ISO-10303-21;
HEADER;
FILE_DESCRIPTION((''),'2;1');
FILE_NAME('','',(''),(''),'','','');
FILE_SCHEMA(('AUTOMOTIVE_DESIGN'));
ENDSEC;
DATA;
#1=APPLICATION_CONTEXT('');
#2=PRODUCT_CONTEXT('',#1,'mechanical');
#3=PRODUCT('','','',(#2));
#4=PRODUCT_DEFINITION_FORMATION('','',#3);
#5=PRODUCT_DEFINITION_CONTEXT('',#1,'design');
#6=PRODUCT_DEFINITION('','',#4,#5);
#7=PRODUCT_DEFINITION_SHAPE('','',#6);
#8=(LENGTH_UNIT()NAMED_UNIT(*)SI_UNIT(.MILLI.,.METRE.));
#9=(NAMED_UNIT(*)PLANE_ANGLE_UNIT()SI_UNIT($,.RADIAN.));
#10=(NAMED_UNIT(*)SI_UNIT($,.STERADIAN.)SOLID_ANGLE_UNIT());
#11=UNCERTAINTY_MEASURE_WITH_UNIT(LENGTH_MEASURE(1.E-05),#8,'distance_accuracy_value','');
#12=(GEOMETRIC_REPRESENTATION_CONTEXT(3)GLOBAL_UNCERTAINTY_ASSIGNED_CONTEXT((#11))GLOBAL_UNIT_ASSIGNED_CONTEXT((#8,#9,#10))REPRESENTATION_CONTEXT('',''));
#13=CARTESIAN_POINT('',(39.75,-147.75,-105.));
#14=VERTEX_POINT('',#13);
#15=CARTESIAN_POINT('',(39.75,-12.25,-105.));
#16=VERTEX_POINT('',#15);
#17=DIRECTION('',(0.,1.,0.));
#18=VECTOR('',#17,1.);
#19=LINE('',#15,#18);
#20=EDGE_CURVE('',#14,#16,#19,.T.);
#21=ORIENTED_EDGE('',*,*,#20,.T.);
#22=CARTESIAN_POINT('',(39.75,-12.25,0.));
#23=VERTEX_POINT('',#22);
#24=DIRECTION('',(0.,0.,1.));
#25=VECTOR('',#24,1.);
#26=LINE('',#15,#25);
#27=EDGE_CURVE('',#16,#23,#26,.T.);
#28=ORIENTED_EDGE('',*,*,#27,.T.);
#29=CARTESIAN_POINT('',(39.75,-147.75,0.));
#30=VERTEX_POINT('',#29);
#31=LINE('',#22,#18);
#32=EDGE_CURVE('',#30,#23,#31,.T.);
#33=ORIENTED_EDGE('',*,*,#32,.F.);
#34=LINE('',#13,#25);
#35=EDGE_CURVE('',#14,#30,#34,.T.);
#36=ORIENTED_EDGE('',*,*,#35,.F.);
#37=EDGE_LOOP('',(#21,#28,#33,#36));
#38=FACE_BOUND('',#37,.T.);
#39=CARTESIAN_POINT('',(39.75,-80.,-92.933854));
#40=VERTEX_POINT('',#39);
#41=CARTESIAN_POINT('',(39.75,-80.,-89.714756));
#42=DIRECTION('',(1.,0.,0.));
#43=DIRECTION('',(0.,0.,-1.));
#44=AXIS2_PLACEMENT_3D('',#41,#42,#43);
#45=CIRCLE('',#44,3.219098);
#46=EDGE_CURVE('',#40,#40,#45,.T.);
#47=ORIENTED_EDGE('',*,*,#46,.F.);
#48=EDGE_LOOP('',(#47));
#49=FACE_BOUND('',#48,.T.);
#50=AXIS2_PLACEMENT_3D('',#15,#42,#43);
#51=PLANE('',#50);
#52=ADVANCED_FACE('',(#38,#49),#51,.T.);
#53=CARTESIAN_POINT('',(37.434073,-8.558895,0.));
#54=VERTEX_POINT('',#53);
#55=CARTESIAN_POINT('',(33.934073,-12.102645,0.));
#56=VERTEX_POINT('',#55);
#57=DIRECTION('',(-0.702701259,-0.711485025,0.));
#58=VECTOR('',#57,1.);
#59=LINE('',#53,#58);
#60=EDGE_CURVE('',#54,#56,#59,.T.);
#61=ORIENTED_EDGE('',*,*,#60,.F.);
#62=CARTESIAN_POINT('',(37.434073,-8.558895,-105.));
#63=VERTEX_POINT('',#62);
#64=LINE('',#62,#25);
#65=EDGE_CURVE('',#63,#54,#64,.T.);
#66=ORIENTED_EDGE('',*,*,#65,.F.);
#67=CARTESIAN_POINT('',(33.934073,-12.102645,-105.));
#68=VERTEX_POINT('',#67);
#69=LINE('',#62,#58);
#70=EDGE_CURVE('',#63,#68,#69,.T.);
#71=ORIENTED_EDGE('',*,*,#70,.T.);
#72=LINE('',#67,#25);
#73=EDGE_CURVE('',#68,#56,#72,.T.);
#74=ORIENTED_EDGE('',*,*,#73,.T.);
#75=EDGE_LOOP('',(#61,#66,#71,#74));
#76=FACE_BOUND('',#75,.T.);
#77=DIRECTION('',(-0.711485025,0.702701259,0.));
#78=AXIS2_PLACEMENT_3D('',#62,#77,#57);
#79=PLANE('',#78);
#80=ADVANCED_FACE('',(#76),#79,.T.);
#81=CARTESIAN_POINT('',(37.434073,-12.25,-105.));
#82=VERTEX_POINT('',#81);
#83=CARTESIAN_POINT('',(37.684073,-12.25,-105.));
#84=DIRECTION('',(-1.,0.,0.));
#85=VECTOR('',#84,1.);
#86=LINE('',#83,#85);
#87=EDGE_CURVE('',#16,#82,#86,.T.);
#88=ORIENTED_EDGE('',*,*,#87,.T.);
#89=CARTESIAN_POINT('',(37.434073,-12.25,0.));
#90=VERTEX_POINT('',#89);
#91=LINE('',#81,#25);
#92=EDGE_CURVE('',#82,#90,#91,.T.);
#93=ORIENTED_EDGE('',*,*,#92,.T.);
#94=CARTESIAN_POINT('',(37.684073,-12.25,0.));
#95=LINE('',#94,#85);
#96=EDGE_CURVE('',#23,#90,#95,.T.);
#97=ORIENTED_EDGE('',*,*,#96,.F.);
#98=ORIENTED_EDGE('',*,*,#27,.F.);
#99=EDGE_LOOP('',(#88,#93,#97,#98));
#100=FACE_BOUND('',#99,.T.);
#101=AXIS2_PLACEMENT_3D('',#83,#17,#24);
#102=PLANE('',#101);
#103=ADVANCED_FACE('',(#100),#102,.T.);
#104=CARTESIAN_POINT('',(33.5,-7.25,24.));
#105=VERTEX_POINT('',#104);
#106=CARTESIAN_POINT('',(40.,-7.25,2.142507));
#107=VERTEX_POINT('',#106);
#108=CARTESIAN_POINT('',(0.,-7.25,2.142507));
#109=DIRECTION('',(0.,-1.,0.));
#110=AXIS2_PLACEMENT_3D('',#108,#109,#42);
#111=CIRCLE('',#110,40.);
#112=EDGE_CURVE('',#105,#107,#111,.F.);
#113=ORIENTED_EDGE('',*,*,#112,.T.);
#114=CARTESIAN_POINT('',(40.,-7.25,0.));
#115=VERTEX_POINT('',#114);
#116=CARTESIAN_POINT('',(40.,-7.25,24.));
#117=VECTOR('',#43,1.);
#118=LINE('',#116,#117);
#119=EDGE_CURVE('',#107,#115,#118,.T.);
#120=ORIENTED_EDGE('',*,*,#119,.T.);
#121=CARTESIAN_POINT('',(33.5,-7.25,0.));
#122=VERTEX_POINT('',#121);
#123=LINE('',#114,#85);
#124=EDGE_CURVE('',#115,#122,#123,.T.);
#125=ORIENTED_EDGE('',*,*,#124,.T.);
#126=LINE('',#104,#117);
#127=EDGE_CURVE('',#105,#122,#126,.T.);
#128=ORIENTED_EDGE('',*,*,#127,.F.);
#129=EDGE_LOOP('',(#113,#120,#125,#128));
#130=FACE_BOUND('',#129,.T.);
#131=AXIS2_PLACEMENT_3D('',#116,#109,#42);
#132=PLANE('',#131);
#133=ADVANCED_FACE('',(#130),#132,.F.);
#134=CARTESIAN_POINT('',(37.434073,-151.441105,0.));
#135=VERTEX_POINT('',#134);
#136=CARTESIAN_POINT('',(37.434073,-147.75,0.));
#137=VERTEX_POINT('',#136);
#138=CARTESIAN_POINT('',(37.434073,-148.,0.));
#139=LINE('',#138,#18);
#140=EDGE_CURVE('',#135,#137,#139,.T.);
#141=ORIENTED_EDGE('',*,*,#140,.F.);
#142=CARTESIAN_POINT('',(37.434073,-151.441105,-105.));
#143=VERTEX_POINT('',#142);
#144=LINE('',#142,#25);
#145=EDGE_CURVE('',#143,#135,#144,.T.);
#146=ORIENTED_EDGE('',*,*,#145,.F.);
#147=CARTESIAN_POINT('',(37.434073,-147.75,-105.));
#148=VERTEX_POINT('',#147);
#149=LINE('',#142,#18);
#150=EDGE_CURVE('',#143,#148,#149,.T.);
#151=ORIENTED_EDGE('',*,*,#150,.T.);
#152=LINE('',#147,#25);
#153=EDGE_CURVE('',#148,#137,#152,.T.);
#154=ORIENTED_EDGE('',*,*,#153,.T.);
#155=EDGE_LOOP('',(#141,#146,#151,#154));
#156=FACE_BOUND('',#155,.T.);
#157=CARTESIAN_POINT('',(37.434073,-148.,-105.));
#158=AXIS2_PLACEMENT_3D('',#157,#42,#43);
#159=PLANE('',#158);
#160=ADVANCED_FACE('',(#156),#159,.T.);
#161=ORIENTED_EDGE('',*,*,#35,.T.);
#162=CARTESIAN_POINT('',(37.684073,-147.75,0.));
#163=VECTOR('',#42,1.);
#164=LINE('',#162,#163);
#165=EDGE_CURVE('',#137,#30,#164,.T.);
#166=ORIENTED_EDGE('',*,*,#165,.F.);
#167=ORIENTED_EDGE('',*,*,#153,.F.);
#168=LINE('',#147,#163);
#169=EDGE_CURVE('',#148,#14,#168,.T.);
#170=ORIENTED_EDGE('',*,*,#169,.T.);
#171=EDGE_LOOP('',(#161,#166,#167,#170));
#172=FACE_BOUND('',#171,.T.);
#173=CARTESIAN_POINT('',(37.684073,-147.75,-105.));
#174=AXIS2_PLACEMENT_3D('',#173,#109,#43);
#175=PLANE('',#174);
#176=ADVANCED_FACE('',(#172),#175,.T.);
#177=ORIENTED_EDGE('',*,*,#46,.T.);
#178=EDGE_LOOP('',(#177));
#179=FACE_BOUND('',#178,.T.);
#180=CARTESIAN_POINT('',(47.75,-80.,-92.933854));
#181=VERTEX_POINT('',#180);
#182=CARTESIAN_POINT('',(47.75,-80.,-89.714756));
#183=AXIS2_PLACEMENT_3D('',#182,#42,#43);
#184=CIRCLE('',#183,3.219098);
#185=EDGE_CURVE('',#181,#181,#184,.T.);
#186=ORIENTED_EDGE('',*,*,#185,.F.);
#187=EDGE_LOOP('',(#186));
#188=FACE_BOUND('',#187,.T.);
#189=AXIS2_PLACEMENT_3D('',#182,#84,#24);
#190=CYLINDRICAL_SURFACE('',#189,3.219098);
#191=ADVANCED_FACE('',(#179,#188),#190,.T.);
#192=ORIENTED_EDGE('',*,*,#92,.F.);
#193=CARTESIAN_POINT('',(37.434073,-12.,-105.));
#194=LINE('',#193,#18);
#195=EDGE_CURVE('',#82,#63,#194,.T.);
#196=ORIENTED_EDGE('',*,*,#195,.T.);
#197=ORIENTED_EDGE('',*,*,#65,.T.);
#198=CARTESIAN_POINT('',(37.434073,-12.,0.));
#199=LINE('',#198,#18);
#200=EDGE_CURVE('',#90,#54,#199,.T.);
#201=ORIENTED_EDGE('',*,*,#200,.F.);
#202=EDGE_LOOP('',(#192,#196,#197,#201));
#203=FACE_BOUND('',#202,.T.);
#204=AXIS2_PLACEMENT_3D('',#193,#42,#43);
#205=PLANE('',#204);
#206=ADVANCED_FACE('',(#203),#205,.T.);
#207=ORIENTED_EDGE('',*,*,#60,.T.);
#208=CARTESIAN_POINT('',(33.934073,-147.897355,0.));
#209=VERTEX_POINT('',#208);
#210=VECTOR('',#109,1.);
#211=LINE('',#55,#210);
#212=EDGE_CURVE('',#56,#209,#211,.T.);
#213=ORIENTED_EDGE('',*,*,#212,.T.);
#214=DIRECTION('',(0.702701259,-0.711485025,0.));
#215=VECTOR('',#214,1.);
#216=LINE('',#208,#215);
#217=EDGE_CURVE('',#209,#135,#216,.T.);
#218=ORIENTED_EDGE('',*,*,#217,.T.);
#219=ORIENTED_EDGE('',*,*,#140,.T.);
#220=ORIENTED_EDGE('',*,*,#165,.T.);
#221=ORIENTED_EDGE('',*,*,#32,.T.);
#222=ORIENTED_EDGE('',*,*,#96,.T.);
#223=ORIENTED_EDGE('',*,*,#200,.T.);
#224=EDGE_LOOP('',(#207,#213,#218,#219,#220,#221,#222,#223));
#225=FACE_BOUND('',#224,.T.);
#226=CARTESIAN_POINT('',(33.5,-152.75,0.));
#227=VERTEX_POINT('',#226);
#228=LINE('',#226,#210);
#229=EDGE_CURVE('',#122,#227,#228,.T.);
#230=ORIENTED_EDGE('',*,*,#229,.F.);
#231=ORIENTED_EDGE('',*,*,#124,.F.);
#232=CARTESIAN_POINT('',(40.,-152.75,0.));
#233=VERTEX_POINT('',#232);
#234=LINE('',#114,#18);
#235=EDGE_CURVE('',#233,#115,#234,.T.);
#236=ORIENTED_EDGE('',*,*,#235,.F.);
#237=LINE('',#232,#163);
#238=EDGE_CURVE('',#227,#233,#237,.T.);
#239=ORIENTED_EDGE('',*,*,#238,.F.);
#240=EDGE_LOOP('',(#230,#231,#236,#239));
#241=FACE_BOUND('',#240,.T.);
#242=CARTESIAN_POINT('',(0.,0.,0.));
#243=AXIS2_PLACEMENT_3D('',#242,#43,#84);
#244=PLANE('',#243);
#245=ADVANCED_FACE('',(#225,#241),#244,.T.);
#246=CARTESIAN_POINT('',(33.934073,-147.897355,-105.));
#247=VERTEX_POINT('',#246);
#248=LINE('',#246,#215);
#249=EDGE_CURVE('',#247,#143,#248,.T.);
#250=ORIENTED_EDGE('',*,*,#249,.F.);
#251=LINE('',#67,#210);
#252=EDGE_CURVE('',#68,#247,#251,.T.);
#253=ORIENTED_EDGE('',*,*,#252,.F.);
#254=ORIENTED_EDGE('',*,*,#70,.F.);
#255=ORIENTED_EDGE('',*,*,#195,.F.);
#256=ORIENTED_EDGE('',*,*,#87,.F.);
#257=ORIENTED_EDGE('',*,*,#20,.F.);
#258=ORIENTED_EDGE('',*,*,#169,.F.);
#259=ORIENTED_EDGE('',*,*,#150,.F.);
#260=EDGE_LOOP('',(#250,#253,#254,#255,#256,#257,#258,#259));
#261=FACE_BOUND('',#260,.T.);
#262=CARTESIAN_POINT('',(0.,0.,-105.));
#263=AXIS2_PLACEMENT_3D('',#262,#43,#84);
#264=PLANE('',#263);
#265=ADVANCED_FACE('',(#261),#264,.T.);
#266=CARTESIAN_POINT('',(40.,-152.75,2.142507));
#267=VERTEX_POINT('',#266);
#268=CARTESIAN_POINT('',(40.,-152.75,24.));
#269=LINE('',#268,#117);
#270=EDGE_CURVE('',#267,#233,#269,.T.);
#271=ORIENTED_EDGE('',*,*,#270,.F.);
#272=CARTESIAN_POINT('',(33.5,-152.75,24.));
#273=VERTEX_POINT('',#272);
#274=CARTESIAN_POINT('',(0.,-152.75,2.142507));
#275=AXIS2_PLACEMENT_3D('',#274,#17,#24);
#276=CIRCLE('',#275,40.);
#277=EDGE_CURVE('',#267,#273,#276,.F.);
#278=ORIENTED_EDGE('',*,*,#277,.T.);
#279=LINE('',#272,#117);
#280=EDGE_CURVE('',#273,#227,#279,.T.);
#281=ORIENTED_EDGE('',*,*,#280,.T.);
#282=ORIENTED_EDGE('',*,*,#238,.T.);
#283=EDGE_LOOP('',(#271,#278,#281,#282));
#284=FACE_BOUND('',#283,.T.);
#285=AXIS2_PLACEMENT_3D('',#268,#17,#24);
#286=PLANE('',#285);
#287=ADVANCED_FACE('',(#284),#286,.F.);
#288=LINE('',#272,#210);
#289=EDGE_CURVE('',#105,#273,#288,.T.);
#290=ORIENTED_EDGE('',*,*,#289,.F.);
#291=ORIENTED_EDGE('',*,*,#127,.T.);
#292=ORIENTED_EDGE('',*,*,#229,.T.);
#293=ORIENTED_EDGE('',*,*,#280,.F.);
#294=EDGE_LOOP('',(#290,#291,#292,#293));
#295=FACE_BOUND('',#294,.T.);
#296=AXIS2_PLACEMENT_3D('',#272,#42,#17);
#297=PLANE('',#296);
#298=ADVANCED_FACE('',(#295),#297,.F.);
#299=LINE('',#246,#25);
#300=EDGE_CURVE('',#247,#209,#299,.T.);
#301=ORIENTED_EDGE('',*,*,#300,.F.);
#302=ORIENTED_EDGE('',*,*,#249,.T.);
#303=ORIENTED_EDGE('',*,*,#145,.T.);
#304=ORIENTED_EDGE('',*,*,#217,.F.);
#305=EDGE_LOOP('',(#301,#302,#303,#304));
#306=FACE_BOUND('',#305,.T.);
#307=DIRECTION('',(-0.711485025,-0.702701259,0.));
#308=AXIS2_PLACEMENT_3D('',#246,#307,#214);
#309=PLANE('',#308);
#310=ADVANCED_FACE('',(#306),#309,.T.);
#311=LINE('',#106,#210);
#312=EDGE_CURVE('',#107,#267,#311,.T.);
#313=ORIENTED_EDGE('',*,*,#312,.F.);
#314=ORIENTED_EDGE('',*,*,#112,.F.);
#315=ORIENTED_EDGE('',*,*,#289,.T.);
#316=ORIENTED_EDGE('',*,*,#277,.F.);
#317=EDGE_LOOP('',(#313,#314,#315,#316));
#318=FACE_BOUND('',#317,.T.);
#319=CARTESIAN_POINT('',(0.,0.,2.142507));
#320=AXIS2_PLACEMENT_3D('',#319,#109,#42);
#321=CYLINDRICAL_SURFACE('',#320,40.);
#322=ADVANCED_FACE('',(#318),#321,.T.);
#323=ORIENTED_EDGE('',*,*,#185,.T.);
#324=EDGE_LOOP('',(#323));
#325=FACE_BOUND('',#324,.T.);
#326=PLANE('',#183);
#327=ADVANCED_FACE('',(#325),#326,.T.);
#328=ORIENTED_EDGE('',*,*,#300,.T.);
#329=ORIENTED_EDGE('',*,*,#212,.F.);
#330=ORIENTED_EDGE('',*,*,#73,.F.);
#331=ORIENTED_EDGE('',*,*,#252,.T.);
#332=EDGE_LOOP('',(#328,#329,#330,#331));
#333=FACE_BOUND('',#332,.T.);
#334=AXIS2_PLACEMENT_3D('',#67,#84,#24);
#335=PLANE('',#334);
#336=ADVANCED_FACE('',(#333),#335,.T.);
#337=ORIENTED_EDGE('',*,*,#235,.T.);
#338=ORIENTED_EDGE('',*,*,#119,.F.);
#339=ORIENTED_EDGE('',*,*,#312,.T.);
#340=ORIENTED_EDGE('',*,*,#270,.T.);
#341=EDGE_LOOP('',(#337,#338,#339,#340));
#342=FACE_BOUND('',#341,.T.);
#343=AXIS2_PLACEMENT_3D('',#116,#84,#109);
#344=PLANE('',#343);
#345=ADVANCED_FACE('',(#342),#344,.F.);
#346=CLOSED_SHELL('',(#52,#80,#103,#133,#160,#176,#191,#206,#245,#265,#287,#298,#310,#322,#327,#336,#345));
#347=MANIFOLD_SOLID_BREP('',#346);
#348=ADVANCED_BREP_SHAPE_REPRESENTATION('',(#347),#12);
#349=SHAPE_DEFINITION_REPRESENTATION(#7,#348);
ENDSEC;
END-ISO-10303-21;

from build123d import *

# Parameters (mm, degrees)
BOSS_EXTRUDE1_DEPTH = 105
BOSS_EXTRUDE2_DEPTH = 24
FILLET1_R           = 40
SKETCH5_R           = 3.219097994
BOSS_EXTRUDE3_DEPTH = 8


with BuildPart() as part:
    # Sketch1 → Boss-Extrude1 (new body)
    with BuildSketch(Plane.XY):
        Polygon((37.434072543, -12), (37.434072543, -8.558894962), (33.934072543, -12.102644962), (33.934072543, -147.897355038), (37.434072543, -151.441105038), (37.434072543, -148), (37.434072543, -147.75), (37.684072543, -147.75), (39.75, -147.75), (39.75, -12.25), (37.684072543, -12.25), (37.434072543, -12.25), align=None)
    extrude(amount=-BOSS_EXTRUDE1_DEPTH)

    # Sketch4 → Boss-Extrude2 (add)
    with BuildSketch(Plane.XY):
        Polygon((40, -152.75), (33.5, -152.75), (33.5, -7.25), (40, -7.25), (40, -80), align=None)
    extrude(amount=BOSS_EXTRUDE2_DEPTH)

    # Fillet1
    # the kernel refuses this fillet: 40 mm, written as the material it takes off along each edge
    with BuildSketch(Plane(origin=(40, 47.393732486, 24), x_dir=(0, 0, -1), z_dir=(0, -1, 0))) as fillet1_piece_1:
        with BuildLine():
            CenterArc((21.857492994, -40), FILLET1_R, 90, 33.122940208)
            Line((0, -6.5), (0, 0))
            Line((0, 0), (21.857492994, 0))
        make_face()
    extrude(amount=254.787464972, mode=Mode.SUBTRACT)

    # Sketch5 → Boss-Extrude3 (add)
    with BuildSketch(Plane(origin=(39.75, 0, 0), x_dir=(0, 0, -1), z_dir=(1, 0, 0))):
        with Locations((89.714756259, -80)):
            Circle(SKETCH5_R)
    extrude(amount=BOSS_EXTRUDE3_DEPTH)


solid = part.part
